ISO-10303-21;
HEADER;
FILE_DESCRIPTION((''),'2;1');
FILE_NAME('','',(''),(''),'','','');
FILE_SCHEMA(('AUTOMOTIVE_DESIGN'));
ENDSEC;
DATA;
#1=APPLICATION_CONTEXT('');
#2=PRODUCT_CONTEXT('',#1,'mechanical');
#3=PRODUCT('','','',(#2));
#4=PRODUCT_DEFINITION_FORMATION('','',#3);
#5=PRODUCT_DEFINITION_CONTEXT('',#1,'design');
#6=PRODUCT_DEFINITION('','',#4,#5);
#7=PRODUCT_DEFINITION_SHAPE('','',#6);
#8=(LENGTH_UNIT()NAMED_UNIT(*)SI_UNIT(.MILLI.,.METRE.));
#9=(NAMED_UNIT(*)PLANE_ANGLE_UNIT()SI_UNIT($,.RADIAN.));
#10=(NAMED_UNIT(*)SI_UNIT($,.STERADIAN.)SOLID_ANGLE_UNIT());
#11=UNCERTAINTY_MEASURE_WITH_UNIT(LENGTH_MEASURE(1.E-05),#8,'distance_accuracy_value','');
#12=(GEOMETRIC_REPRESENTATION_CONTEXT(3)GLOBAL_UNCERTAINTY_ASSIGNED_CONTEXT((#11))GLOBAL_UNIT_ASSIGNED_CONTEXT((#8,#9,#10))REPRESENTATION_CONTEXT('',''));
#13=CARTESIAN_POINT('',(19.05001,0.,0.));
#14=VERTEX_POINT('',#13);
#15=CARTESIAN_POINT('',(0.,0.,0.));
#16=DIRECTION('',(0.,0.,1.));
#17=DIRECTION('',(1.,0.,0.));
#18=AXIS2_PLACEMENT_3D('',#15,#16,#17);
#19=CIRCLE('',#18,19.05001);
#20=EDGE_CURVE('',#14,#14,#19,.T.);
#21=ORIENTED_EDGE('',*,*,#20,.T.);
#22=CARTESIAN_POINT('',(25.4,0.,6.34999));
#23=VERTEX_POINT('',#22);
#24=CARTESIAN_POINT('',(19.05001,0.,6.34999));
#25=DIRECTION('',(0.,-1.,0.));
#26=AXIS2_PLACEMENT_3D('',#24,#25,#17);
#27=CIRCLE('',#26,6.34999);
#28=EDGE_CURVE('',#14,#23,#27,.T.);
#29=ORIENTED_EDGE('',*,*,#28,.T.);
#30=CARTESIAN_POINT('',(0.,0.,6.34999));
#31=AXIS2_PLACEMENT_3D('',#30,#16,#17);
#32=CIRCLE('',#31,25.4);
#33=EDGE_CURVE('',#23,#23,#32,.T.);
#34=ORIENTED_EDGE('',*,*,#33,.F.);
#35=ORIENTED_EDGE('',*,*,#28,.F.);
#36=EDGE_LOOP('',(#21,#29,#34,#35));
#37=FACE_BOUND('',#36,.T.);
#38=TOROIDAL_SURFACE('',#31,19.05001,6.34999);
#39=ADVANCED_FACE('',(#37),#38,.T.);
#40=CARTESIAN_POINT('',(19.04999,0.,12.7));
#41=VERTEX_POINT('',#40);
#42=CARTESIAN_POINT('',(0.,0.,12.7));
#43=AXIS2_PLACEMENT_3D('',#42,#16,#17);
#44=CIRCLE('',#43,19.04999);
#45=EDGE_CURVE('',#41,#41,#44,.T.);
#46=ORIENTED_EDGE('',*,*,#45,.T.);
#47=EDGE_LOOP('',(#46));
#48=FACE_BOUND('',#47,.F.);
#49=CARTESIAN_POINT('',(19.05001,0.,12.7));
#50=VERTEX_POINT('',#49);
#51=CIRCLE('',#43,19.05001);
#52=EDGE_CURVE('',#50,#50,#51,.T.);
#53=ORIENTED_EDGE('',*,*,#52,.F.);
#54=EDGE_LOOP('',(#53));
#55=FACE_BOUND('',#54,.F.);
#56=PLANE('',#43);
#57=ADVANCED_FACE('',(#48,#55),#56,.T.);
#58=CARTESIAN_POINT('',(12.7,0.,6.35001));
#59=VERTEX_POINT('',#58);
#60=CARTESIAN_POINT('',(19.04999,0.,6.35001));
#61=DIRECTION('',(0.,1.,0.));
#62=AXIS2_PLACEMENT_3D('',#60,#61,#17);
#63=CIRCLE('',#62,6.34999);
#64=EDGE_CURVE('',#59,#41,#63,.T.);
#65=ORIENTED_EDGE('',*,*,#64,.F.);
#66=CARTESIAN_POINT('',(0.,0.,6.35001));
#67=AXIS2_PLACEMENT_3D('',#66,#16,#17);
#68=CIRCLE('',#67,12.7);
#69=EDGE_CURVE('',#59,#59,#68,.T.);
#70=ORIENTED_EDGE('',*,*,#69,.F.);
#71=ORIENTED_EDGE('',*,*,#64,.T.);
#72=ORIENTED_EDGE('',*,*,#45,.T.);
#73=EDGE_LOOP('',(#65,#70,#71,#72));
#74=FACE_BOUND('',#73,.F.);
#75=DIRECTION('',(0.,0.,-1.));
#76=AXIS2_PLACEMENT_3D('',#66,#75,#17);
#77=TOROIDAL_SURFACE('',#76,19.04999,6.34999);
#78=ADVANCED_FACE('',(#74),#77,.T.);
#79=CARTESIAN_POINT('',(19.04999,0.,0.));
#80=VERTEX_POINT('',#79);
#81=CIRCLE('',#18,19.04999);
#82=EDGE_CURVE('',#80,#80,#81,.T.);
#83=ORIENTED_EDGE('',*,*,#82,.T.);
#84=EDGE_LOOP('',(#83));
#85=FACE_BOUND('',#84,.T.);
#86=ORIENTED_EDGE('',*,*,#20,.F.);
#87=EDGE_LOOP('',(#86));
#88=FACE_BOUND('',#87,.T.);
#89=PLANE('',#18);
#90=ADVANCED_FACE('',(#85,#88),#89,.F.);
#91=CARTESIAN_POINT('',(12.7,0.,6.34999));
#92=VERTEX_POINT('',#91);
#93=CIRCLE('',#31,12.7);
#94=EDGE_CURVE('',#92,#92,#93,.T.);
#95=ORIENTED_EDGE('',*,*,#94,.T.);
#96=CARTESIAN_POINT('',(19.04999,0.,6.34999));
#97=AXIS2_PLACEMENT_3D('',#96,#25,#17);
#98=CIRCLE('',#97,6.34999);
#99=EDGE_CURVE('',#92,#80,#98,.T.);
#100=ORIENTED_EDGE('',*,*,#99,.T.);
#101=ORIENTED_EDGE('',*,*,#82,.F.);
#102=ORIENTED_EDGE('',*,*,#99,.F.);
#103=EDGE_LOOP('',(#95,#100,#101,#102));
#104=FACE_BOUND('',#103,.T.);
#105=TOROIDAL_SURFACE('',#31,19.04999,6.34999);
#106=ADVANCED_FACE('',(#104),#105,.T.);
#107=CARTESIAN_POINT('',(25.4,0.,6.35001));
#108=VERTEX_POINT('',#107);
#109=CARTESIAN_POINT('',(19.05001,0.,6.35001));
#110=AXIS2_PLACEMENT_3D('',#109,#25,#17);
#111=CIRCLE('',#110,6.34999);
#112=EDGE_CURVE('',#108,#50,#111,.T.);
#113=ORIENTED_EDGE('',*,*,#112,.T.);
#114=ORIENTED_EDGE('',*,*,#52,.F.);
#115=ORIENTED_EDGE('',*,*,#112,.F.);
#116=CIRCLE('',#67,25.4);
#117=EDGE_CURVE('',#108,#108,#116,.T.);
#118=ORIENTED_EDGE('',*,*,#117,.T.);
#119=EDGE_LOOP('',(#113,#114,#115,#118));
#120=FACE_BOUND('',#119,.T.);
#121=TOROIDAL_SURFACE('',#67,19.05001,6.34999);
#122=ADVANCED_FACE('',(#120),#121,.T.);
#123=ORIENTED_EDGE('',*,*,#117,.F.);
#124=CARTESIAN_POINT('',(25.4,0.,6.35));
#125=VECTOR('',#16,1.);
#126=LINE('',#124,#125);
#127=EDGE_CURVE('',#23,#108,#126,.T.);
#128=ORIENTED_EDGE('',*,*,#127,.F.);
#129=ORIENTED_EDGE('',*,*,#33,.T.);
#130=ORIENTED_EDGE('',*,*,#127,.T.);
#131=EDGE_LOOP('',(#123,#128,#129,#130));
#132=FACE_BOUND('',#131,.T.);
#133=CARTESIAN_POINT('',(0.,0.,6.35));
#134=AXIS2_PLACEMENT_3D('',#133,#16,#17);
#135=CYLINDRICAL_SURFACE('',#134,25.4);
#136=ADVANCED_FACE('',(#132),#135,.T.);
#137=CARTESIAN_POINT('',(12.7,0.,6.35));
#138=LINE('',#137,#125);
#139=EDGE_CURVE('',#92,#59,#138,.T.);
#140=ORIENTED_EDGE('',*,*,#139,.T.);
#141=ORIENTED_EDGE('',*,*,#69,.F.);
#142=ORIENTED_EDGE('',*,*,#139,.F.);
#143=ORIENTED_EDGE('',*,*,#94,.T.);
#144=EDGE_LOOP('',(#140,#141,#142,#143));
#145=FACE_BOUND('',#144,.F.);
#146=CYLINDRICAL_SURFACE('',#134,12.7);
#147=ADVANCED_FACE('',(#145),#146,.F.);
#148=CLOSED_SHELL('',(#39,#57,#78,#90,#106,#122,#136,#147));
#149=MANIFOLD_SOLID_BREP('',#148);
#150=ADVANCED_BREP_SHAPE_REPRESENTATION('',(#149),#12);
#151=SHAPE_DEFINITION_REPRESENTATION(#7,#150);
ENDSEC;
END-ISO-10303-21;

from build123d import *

# Parameters (mm, degrees)
F0_W = 12.7
F0_H = 12.7
F2_R = 6.34999


# Not quite as in the source:
# - a fillet or chamfer is up to 0.001 mm smaller than in the source, because OpenCascade refuses the exact size


with BuildPart() as f1:
    # F0 (on Front) → F1 (revolve)
    with BuildSketch(Plane.XZ):
        with Locations((19.05, 6.35)):
            Rectangle(F0_W, F0_H)
    revolve(axis=Axis((0, 0, 6.35), (0, 0, 1)))

    # F2 (radius 6.35 in the source; OpenCascade refuses exactly that, so slightly less here)
    f2_edges = [f1.edges().sort_by_distance(p)[0] for p in [
        (-25.4, 0, 12.7),
        (-12.7, 0, 12.7),
        (-12.7, 0, 0),
        (-25.4, 0, 0),
    ]]
    fillet(f2_edges, radius=F2_R)


solid = f1.part
